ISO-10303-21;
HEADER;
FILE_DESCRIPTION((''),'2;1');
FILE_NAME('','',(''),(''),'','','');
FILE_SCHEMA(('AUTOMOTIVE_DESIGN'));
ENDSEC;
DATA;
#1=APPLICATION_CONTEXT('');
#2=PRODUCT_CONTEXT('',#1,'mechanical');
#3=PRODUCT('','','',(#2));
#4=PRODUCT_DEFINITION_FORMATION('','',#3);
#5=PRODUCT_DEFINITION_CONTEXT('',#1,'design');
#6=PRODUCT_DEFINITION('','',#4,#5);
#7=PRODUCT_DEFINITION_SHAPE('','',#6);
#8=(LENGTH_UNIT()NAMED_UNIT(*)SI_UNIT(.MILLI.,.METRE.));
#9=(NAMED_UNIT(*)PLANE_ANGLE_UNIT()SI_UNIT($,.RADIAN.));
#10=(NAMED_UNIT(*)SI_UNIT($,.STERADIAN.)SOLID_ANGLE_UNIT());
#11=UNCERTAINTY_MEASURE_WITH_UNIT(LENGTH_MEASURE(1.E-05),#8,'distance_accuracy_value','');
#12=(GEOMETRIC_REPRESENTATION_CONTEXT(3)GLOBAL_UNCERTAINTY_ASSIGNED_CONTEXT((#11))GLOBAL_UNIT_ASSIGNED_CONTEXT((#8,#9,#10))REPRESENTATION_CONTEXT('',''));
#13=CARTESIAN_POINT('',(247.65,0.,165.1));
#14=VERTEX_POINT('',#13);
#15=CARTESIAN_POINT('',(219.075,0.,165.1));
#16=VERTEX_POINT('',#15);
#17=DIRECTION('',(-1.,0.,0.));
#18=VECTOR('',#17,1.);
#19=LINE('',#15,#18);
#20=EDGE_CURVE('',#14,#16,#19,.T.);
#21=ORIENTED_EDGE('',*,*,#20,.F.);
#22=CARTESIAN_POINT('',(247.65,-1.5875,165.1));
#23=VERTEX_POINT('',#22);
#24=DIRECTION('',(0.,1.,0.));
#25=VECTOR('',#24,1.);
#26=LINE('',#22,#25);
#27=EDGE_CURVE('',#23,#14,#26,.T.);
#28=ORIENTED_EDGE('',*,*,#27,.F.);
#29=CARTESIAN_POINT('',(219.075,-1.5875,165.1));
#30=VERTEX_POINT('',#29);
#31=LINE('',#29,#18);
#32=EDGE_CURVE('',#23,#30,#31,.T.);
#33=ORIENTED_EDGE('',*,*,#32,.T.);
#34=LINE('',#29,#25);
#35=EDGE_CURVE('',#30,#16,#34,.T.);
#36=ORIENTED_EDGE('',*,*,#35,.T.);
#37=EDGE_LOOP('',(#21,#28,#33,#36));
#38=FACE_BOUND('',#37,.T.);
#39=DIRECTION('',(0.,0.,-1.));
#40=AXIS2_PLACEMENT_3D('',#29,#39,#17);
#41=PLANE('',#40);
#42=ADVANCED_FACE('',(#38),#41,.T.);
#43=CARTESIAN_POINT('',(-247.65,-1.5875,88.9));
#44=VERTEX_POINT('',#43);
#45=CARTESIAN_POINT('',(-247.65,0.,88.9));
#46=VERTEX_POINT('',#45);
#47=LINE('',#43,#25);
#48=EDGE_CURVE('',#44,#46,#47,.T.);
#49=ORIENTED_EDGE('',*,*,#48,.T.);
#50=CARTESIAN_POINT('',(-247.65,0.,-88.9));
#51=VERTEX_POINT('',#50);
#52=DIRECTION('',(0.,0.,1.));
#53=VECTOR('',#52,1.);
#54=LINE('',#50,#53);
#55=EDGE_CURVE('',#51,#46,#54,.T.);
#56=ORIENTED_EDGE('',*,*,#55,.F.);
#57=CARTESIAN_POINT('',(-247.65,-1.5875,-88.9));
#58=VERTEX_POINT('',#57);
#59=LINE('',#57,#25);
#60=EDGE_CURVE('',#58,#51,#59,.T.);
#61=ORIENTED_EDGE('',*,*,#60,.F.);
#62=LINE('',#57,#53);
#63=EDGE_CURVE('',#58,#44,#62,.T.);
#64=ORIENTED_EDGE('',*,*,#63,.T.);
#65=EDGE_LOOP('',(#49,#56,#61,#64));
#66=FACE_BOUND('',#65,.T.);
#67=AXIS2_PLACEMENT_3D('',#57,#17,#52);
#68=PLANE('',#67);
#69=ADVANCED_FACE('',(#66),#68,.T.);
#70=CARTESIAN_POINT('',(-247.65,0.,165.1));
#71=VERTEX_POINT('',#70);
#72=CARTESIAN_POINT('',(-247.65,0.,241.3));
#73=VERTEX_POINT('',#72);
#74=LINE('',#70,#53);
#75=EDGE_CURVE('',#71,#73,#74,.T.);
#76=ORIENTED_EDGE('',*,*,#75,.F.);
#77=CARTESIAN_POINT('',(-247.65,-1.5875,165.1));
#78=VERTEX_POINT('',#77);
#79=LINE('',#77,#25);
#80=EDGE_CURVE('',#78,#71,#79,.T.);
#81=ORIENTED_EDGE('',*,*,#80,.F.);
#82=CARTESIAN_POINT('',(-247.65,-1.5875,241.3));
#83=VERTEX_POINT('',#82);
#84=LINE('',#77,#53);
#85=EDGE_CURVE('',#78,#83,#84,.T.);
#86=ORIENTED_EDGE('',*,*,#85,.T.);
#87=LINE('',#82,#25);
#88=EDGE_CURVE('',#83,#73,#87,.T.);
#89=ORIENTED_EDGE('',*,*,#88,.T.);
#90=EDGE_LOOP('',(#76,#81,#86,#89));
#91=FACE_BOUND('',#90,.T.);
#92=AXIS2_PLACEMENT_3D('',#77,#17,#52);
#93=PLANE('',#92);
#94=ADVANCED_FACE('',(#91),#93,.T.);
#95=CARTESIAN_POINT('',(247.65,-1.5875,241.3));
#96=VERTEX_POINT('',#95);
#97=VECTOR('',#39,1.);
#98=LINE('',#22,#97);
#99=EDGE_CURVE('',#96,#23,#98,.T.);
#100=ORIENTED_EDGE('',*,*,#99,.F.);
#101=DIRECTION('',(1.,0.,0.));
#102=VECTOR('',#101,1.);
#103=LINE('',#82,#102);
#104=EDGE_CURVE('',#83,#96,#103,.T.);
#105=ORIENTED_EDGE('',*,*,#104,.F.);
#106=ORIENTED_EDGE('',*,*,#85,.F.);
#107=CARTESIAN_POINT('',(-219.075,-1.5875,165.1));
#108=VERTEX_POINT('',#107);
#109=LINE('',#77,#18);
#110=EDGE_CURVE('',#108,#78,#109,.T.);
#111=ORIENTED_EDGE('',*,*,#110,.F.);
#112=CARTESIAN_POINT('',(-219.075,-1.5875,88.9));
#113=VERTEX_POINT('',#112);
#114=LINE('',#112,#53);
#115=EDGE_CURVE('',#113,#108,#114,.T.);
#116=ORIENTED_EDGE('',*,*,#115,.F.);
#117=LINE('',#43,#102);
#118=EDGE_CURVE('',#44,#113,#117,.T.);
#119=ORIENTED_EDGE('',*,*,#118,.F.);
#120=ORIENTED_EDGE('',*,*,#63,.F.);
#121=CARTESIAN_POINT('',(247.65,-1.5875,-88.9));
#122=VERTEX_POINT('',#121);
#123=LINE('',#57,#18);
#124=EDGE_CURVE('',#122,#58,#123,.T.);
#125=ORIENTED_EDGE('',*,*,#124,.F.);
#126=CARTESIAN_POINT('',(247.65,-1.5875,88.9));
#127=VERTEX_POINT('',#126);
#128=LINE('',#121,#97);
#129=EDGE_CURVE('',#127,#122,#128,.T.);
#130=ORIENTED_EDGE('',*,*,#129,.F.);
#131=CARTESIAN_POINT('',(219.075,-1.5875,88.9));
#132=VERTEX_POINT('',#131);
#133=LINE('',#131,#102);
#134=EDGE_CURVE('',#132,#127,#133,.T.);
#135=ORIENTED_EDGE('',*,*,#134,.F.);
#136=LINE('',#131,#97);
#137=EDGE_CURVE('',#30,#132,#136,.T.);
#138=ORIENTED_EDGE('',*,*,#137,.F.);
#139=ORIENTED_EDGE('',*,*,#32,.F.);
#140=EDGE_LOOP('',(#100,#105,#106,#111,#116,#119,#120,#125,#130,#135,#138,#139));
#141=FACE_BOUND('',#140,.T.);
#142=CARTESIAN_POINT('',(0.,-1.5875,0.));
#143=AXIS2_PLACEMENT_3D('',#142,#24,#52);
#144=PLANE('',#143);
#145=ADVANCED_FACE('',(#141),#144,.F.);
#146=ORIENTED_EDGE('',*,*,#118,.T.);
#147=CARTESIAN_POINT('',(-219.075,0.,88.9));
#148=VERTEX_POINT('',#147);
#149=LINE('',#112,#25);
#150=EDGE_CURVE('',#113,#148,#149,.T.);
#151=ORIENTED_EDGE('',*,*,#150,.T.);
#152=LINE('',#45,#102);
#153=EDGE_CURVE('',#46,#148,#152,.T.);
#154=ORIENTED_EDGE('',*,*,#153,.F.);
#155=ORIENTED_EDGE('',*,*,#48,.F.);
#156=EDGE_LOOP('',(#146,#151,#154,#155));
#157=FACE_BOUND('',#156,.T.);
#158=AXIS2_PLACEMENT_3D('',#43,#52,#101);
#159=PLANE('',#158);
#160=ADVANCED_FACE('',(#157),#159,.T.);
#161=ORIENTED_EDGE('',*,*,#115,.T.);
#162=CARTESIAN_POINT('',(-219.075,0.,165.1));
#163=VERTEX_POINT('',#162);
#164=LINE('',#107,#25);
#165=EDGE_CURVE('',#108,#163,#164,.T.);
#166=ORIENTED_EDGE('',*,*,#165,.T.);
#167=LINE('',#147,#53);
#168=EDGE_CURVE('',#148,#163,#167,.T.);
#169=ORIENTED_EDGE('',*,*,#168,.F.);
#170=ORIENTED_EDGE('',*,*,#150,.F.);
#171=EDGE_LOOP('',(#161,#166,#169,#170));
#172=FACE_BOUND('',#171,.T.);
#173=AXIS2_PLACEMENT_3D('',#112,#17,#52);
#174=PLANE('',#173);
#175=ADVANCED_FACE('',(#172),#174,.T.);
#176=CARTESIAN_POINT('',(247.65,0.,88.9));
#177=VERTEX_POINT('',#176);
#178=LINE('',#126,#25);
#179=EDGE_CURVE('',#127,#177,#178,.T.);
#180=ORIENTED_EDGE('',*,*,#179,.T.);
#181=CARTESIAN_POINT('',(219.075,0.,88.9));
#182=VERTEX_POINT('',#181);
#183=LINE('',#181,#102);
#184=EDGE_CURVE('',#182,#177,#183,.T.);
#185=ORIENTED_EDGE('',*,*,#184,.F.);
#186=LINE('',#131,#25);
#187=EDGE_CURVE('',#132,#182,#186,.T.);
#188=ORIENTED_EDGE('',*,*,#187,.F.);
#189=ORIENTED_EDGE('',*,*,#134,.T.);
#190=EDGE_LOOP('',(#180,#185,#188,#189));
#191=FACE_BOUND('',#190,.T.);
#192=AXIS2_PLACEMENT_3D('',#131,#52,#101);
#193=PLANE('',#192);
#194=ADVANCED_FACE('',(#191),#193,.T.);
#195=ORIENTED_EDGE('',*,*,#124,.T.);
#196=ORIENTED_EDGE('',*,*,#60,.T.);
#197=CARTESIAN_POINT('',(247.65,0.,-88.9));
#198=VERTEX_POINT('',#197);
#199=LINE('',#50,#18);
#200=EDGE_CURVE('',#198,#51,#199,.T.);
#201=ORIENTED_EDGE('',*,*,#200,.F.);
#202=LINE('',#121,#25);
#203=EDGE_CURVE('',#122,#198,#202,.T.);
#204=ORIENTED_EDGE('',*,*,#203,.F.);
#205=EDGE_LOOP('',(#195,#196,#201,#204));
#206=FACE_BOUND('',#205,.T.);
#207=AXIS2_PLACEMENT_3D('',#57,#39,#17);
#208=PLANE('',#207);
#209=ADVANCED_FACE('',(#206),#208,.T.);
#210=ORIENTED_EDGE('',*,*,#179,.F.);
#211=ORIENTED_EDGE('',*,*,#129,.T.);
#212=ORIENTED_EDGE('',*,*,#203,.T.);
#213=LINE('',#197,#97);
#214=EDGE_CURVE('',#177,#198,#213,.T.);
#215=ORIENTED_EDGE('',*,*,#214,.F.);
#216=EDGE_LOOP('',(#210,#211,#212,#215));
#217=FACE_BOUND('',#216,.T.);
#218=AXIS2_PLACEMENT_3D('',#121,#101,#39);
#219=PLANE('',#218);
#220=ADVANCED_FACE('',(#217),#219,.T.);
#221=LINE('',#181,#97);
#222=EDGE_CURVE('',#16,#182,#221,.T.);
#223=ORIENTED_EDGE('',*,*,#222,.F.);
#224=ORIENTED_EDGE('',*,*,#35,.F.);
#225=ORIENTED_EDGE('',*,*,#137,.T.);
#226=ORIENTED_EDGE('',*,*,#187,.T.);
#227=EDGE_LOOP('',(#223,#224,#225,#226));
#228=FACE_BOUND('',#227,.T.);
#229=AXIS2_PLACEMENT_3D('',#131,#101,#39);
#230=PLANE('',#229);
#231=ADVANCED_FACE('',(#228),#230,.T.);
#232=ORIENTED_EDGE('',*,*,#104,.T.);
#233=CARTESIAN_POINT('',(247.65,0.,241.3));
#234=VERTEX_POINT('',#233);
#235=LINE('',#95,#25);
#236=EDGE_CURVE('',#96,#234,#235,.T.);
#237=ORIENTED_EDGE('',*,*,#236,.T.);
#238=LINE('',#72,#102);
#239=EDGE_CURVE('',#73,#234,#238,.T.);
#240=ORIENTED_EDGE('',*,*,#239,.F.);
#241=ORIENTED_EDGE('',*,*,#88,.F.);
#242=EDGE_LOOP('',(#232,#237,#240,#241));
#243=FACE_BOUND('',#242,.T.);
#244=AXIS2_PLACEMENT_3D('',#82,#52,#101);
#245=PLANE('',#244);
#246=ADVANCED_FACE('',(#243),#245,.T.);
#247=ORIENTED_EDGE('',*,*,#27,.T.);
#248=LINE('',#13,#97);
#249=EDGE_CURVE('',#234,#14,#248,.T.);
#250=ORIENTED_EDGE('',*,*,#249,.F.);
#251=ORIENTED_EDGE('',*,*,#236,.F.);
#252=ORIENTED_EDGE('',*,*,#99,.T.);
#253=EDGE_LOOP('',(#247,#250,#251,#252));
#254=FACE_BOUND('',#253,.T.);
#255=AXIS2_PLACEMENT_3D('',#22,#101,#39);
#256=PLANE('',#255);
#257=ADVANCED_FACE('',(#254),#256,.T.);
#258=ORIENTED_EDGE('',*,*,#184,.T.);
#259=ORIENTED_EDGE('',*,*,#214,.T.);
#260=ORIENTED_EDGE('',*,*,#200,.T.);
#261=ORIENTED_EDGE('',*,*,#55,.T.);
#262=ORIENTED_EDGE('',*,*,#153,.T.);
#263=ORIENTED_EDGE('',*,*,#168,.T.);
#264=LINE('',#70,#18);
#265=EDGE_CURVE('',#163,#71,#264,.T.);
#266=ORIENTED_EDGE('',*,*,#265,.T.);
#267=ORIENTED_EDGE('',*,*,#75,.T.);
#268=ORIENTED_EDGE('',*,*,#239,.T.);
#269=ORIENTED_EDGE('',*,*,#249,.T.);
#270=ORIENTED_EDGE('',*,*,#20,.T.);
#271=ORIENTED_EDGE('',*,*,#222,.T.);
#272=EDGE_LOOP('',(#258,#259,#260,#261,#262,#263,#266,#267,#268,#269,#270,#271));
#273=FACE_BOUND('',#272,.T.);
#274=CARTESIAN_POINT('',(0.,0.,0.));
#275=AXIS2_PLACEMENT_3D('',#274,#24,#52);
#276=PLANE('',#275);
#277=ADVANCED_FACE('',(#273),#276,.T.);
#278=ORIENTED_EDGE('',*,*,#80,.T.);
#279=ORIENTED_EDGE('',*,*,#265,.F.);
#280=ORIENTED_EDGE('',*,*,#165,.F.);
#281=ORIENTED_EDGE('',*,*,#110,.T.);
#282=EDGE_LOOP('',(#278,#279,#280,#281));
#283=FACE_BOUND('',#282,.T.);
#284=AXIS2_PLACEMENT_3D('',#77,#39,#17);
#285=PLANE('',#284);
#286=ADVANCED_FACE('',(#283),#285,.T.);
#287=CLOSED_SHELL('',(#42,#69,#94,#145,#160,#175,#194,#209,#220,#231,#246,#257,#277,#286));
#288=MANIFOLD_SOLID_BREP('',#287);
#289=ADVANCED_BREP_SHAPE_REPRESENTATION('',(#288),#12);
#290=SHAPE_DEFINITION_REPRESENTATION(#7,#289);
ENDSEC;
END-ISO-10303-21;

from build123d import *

# Parameters (mm, degrees)
BASE_FLANGE1_DEPTH = 1.5875


# Sheet-metal steps are written as plain solids
with BuildPart() as part:
    # Sketch1 → Base-Flange1 (new body)
    with BuildSketch(Plane(origin=(0, 0, 0), x_dir=(1, 0, 0), z_dir=(0, 1, 0))):
        Polygon((219.075, -88.9), (247.65, -88.9), (247.65, 88.9), (-247.65, 88.9), (-247.65, -88.9), (-219.075, -88.9), (-219.075, -165.1), (-247.65, -165.1), (-247.65, -241.3), (247.65, -241.3), (247.65, -165.1), (219.075, -165.1), align=None)
    extrude(amount=-BASE_FLANGE1_DEPTH)


solid = part.part
